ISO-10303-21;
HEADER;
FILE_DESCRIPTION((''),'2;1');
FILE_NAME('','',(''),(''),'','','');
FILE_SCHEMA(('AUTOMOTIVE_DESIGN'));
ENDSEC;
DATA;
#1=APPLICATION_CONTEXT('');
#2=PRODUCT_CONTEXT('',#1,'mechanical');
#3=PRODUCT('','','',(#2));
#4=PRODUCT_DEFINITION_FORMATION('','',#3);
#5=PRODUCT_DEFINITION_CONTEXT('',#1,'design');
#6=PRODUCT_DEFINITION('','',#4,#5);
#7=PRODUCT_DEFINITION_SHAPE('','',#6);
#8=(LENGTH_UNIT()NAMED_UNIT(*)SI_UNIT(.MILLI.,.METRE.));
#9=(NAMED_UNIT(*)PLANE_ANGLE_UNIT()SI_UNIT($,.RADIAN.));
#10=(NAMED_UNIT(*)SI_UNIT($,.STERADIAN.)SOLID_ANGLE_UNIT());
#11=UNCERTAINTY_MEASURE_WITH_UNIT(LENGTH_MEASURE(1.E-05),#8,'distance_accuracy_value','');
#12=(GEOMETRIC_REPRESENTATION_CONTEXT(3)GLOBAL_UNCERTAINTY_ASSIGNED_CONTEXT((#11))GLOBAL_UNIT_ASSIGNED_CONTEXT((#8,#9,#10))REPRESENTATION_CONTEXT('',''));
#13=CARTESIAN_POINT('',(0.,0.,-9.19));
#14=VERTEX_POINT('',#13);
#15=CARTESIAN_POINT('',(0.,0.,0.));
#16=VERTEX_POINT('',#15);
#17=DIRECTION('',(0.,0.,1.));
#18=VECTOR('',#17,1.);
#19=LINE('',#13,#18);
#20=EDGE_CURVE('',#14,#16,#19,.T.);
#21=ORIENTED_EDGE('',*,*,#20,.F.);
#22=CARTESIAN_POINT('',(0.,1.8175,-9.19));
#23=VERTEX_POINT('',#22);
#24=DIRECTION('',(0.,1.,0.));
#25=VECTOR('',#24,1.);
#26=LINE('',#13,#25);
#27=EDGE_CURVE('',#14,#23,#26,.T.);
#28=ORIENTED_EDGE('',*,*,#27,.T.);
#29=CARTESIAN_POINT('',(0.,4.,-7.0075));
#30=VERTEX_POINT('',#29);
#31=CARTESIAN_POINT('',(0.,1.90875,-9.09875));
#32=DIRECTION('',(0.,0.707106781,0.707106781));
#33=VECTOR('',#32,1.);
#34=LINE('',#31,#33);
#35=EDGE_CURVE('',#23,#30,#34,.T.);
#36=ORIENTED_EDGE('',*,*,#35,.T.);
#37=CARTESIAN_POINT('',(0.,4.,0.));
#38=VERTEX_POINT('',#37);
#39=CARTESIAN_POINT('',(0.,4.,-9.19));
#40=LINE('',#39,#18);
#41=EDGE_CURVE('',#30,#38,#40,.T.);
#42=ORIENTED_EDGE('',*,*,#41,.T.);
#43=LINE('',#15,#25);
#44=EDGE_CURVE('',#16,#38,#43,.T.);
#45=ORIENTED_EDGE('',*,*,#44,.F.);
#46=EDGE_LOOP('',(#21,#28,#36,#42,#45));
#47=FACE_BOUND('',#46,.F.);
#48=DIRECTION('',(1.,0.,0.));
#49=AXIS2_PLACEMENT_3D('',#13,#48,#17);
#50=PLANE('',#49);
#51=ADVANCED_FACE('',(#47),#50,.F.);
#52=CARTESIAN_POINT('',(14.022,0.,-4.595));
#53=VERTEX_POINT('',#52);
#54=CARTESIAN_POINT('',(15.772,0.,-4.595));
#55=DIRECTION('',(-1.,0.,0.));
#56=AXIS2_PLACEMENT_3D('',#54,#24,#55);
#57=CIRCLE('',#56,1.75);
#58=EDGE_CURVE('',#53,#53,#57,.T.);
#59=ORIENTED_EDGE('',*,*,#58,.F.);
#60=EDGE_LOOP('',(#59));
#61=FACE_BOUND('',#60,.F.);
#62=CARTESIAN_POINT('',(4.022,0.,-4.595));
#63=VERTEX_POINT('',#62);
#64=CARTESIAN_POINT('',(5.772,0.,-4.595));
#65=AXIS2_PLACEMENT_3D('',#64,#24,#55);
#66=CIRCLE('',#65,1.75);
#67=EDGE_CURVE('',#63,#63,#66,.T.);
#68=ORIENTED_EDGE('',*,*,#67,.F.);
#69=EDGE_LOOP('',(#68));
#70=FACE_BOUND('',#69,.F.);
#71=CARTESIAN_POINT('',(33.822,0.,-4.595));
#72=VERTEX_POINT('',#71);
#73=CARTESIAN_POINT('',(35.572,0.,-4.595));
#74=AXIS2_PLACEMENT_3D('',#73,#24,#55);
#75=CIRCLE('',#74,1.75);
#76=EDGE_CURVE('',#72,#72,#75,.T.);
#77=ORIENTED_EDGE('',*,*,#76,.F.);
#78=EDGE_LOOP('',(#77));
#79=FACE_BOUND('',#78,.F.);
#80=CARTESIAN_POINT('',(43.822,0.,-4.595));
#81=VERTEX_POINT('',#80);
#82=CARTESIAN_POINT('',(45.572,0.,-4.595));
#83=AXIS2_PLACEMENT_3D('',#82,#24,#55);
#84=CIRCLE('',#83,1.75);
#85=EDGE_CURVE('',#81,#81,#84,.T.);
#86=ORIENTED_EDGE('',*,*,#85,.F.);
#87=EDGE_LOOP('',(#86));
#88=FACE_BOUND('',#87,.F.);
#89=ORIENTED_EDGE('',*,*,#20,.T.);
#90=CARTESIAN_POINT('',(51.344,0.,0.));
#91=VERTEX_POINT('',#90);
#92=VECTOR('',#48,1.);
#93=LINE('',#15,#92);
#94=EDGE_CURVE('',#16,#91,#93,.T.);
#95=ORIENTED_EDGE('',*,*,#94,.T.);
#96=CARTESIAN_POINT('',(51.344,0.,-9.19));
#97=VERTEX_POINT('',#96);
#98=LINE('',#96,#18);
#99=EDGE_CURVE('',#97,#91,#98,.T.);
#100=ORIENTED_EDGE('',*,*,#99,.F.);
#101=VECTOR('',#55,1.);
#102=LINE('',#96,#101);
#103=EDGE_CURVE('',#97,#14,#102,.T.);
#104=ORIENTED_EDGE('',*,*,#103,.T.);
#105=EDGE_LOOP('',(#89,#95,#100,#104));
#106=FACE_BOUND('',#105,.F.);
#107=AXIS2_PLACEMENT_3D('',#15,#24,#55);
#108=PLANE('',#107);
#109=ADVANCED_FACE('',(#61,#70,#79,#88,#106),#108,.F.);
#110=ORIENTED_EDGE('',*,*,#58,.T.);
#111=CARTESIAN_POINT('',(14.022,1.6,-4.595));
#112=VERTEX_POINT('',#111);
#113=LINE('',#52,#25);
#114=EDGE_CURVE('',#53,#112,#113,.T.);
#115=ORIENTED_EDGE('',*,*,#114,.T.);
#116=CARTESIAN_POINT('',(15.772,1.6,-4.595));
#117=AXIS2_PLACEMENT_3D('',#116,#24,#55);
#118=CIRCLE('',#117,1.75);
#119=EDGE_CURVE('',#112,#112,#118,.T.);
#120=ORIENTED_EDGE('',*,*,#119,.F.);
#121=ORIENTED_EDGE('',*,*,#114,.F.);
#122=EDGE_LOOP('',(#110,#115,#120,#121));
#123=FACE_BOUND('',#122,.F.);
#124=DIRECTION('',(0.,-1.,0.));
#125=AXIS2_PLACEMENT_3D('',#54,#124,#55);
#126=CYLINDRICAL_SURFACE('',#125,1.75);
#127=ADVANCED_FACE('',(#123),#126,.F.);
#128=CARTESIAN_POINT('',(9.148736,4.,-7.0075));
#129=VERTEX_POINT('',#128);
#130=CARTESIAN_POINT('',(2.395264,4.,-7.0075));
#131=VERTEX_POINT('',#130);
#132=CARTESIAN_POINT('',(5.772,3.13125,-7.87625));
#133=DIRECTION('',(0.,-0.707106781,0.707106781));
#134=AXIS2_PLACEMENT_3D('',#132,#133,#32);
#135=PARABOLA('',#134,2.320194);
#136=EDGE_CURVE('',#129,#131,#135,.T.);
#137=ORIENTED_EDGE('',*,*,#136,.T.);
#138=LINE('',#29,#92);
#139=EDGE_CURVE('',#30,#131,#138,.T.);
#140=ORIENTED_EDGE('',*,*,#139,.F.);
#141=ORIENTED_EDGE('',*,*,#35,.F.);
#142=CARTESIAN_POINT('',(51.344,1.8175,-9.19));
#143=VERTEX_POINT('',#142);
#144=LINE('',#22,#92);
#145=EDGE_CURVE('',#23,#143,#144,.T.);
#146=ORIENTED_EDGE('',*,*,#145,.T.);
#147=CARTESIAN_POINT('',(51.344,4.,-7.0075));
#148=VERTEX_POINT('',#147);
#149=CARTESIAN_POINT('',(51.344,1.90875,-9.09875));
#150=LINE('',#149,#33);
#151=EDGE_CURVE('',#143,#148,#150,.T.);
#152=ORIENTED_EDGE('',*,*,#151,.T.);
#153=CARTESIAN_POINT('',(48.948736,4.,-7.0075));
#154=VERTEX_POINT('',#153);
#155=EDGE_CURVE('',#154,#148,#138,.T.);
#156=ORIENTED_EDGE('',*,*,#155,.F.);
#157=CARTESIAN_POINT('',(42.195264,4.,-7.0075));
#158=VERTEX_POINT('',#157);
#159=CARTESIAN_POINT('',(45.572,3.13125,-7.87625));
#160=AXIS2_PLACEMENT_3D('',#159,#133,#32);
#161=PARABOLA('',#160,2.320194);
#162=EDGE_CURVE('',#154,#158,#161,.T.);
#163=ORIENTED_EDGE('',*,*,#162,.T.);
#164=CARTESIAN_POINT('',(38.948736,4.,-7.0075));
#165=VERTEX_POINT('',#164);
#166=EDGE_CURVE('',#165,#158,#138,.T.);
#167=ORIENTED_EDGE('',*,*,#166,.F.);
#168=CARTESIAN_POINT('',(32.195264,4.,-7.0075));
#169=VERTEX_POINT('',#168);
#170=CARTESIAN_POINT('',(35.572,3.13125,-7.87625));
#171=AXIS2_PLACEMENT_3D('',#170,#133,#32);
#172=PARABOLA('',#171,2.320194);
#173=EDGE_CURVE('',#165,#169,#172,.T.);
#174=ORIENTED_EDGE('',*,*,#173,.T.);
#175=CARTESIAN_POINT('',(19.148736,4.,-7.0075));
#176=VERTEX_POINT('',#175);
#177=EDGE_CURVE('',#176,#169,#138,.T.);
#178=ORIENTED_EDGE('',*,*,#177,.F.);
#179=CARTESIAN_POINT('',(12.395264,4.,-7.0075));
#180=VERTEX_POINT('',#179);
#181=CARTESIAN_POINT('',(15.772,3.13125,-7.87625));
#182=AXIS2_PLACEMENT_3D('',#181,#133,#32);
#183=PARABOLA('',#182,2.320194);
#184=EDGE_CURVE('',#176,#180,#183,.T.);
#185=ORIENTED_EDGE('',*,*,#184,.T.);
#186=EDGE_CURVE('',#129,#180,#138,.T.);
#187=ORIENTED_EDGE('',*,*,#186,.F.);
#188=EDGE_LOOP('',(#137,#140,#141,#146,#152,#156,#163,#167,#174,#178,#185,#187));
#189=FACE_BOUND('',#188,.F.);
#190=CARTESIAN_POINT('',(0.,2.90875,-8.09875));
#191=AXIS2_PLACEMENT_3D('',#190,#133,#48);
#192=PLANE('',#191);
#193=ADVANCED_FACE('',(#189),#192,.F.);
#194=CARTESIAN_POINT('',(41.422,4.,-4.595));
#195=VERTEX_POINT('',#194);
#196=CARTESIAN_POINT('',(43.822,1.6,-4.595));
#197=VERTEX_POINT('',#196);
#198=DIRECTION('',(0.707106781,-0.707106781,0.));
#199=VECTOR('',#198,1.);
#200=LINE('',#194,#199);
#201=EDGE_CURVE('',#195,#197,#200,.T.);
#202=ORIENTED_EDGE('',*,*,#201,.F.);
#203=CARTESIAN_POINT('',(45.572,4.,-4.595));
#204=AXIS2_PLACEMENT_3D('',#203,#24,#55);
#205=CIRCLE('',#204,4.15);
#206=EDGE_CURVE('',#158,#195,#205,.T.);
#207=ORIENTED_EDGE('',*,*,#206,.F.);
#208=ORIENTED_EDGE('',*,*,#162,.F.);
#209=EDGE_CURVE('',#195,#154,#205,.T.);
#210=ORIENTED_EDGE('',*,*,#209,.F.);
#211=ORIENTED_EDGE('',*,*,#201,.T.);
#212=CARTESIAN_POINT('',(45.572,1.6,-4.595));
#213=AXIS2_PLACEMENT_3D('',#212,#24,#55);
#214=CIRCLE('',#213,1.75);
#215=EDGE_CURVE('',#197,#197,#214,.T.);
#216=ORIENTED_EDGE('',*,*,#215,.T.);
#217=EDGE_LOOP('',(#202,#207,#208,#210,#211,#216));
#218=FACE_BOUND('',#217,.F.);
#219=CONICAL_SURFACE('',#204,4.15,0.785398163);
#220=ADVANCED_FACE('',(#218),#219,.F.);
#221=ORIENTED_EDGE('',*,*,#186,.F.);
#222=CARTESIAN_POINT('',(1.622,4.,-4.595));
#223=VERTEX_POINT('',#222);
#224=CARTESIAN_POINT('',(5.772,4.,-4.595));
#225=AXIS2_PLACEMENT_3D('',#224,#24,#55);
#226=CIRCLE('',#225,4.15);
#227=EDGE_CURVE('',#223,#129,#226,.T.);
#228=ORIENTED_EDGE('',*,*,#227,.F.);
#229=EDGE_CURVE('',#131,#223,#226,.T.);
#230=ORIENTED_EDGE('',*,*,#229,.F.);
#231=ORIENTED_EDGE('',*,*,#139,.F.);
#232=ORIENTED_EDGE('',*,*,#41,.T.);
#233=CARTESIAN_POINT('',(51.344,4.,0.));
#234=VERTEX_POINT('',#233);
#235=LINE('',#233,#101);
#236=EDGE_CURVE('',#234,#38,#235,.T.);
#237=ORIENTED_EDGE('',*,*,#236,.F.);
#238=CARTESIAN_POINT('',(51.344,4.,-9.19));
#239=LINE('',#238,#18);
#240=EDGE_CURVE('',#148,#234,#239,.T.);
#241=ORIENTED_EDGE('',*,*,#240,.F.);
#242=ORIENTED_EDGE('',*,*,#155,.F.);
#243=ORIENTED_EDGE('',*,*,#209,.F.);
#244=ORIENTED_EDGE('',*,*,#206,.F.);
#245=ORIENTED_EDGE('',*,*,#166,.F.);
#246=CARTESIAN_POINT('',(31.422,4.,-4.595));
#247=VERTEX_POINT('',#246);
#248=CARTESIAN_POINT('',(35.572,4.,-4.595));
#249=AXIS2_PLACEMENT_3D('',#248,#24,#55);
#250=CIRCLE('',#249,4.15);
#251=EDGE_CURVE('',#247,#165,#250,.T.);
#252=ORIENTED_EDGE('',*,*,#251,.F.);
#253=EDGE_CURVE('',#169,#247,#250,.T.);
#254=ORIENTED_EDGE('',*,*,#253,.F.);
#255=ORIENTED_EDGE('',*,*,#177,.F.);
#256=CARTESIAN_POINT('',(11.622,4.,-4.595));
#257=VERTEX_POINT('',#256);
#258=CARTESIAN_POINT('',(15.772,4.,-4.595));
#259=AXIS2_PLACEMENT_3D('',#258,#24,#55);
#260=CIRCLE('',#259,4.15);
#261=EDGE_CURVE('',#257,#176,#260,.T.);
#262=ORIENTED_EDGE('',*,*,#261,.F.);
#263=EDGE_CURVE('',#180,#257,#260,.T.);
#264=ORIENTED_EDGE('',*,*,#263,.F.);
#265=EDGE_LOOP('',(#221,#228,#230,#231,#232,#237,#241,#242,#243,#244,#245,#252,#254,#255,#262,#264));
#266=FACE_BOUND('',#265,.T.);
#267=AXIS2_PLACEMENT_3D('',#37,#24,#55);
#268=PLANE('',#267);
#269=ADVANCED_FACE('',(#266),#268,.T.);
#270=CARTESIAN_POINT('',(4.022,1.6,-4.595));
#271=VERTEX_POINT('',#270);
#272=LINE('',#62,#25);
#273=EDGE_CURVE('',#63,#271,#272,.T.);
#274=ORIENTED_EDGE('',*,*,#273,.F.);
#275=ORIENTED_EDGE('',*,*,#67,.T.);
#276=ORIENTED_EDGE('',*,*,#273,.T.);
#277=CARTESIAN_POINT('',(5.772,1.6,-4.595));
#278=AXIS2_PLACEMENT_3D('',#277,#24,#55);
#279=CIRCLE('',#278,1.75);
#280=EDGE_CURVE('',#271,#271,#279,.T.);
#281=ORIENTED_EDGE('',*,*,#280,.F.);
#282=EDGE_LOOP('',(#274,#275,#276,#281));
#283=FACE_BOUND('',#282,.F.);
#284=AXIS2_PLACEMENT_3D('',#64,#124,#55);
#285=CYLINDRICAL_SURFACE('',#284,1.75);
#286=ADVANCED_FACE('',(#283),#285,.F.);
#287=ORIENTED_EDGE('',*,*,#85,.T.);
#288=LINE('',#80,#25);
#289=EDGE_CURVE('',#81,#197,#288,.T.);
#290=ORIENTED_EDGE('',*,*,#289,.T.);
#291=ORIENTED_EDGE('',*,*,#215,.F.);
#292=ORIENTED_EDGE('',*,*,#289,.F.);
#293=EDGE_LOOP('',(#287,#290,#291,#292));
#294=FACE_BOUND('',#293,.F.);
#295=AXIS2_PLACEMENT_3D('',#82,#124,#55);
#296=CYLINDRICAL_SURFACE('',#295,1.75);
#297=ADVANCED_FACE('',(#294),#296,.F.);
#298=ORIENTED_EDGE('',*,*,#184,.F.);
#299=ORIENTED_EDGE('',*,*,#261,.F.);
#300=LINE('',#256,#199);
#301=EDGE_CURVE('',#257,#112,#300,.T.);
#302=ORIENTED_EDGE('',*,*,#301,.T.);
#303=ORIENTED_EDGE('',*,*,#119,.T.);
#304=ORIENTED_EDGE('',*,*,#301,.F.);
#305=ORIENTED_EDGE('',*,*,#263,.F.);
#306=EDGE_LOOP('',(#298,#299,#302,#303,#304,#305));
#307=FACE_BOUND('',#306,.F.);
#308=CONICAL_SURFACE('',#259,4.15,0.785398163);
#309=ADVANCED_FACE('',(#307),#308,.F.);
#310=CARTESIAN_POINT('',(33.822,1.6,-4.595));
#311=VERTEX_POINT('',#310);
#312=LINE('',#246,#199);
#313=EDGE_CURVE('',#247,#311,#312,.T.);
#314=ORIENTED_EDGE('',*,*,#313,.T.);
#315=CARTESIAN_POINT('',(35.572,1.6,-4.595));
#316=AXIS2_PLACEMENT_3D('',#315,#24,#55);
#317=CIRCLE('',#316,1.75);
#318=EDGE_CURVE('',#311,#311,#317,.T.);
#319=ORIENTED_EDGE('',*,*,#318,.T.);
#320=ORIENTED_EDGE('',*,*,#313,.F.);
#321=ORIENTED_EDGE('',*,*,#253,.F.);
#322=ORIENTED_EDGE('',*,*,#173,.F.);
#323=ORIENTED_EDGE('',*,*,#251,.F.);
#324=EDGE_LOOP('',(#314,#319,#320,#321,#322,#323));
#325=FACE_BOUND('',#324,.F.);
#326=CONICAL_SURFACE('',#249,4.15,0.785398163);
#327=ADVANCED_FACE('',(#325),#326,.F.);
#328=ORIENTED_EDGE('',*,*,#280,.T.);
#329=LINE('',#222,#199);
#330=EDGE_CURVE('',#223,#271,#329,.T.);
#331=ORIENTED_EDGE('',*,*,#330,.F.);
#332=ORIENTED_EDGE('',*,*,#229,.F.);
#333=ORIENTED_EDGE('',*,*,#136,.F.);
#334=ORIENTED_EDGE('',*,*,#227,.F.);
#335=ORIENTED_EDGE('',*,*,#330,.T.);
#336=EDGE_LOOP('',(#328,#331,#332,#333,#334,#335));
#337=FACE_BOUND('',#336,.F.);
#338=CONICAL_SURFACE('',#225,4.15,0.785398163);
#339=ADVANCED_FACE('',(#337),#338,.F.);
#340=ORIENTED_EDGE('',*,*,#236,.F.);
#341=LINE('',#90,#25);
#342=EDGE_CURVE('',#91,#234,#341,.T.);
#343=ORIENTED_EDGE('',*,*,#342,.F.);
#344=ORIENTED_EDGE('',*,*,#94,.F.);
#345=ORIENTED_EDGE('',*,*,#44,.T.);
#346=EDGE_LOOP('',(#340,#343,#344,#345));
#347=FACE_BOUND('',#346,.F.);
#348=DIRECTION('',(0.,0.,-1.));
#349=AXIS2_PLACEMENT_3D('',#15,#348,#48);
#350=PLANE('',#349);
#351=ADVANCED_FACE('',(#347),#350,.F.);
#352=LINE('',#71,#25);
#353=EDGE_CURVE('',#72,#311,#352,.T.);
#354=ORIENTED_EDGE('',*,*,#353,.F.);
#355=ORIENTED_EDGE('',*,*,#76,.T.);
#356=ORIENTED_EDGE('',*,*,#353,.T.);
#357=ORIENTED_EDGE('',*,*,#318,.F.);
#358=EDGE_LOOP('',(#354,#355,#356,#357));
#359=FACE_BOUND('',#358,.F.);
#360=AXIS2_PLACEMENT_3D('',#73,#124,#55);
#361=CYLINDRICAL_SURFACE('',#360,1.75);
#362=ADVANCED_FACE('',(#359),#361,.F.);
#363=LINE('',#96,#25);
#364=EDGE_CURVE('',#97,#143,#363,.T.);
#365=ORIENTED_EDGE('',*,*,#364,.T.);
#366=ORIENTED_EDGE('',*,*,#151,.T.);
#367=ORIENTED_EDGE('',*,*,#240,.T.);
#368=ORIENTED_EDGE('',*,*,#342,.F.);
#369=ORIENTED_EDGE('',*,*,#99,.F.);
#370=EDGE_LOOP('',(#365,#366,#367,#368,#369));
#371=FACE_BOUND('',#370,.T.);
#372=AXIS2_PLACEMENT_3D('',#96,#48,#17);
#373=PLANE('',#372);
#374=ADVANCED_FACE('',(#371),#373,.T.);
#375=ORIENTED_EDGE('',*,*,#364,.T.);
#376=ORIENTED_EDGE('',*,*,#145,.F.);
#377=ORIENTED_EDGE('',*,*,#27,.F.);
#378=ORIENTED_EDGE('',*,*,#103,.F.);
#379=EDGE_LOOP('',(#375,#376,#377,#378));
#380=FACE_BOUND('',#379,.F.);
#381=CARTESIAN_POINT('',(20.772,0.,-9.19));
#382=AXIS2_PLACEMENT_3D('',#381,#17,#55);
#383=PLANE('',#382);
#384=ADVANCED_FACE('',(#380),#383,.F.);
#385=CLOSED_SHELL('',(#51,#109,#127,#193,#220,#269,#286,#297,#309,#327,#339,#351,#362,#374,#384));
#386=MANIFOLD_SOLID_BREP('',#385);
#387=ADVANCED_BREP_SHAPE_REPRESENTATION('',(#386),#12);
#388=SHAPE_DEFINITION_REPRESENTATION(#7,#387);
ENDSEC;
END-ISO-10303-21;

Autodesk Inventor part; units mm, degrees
ref_plane "YZ Plane" through (0, 0, 0) normal (1, 0, 0) x (0, 1, 0)
ref_plane "XZ Plane" through (0, 0, 0) normal (0, 1, 0) x (-1, 0, 0)
ref_plane "XY Plane" through (0, 0, 0) normal (0, 0, 1) x (1, 0, 0)
sketch "Sketch1" plane through (0, 0, 0) normal (0, 1, 0) x (-1, 0, 0)
  line L0 (0, 0) -> (-20.772, 0)
  line L1 (-20.772, 0) -> (-20.772, -9.19)
  line L2 (-20.772, -9.19) -> (0, -9.19)
  line L3 (0, -9.19) -> (0, 0)
  line L4 (-20.772, -9.19) -> (-30.572, -9.19)
  line L5 (-30.572, -9.19) -> (-30.572, 0)
  line L6 (-30.572, 0) -> (-20.772, 0)
  line L7 (-20.772, 0) -> (-20.772, -9.19)
  line L8 (-30.572, -9.19) -> (-51.344, -9.19)
  line L9 (-51.344, -9.19) -> (-51.344, 0)
  line L10 (-51.344, 0) -> (-30.572, 0)
  line L11 (-30.572, 0) -> (-30.572, -9.19)
  circle A0 centre (-5.772, -4.595) radius 1.75
  circle A1 centre (-15.772, -4.595) radius 1.75
  circle A2 centre (-35.572, -4.595) radius 1.75
  circle A3 centre (-45.572, -4.595) radius 1.75
  dimension "d0" = 20.772
  dimension "d1" = 9.19
  dimension "d2" = 9.8
  dimension "d3" = 9.19
  dimension "d4" = 20.772
  dimension "d5" = 9.19
  dimension "d6" = 3.5
  dimension "d7" = 3.5
  dimension "d8" = 3.5
  dimension "d9" = 3.5
  dimension "d10" = 5.772
  dimension "d11" = 10
  dimension "d12" = 5.772
  dimension "d13" = 10
extrude "Extrusion1" add sketch "Sketch1" along normal blind 4
chamfer "Chamfer1" distance 2.1825 angle 45 1 edges at (25.672, 4, -9.19)
chamfer "Chamfer2" distance 2.4 angle 45 4 edges at (7.522, 4, -4.595) (17.522, 4, -4.595) (37.322, 4, -4.595) (47.322, 4, -4.595)
equation "\"d12\" = d10"
equation "\"d13\" = d11"
properties part number "topSpacer"
